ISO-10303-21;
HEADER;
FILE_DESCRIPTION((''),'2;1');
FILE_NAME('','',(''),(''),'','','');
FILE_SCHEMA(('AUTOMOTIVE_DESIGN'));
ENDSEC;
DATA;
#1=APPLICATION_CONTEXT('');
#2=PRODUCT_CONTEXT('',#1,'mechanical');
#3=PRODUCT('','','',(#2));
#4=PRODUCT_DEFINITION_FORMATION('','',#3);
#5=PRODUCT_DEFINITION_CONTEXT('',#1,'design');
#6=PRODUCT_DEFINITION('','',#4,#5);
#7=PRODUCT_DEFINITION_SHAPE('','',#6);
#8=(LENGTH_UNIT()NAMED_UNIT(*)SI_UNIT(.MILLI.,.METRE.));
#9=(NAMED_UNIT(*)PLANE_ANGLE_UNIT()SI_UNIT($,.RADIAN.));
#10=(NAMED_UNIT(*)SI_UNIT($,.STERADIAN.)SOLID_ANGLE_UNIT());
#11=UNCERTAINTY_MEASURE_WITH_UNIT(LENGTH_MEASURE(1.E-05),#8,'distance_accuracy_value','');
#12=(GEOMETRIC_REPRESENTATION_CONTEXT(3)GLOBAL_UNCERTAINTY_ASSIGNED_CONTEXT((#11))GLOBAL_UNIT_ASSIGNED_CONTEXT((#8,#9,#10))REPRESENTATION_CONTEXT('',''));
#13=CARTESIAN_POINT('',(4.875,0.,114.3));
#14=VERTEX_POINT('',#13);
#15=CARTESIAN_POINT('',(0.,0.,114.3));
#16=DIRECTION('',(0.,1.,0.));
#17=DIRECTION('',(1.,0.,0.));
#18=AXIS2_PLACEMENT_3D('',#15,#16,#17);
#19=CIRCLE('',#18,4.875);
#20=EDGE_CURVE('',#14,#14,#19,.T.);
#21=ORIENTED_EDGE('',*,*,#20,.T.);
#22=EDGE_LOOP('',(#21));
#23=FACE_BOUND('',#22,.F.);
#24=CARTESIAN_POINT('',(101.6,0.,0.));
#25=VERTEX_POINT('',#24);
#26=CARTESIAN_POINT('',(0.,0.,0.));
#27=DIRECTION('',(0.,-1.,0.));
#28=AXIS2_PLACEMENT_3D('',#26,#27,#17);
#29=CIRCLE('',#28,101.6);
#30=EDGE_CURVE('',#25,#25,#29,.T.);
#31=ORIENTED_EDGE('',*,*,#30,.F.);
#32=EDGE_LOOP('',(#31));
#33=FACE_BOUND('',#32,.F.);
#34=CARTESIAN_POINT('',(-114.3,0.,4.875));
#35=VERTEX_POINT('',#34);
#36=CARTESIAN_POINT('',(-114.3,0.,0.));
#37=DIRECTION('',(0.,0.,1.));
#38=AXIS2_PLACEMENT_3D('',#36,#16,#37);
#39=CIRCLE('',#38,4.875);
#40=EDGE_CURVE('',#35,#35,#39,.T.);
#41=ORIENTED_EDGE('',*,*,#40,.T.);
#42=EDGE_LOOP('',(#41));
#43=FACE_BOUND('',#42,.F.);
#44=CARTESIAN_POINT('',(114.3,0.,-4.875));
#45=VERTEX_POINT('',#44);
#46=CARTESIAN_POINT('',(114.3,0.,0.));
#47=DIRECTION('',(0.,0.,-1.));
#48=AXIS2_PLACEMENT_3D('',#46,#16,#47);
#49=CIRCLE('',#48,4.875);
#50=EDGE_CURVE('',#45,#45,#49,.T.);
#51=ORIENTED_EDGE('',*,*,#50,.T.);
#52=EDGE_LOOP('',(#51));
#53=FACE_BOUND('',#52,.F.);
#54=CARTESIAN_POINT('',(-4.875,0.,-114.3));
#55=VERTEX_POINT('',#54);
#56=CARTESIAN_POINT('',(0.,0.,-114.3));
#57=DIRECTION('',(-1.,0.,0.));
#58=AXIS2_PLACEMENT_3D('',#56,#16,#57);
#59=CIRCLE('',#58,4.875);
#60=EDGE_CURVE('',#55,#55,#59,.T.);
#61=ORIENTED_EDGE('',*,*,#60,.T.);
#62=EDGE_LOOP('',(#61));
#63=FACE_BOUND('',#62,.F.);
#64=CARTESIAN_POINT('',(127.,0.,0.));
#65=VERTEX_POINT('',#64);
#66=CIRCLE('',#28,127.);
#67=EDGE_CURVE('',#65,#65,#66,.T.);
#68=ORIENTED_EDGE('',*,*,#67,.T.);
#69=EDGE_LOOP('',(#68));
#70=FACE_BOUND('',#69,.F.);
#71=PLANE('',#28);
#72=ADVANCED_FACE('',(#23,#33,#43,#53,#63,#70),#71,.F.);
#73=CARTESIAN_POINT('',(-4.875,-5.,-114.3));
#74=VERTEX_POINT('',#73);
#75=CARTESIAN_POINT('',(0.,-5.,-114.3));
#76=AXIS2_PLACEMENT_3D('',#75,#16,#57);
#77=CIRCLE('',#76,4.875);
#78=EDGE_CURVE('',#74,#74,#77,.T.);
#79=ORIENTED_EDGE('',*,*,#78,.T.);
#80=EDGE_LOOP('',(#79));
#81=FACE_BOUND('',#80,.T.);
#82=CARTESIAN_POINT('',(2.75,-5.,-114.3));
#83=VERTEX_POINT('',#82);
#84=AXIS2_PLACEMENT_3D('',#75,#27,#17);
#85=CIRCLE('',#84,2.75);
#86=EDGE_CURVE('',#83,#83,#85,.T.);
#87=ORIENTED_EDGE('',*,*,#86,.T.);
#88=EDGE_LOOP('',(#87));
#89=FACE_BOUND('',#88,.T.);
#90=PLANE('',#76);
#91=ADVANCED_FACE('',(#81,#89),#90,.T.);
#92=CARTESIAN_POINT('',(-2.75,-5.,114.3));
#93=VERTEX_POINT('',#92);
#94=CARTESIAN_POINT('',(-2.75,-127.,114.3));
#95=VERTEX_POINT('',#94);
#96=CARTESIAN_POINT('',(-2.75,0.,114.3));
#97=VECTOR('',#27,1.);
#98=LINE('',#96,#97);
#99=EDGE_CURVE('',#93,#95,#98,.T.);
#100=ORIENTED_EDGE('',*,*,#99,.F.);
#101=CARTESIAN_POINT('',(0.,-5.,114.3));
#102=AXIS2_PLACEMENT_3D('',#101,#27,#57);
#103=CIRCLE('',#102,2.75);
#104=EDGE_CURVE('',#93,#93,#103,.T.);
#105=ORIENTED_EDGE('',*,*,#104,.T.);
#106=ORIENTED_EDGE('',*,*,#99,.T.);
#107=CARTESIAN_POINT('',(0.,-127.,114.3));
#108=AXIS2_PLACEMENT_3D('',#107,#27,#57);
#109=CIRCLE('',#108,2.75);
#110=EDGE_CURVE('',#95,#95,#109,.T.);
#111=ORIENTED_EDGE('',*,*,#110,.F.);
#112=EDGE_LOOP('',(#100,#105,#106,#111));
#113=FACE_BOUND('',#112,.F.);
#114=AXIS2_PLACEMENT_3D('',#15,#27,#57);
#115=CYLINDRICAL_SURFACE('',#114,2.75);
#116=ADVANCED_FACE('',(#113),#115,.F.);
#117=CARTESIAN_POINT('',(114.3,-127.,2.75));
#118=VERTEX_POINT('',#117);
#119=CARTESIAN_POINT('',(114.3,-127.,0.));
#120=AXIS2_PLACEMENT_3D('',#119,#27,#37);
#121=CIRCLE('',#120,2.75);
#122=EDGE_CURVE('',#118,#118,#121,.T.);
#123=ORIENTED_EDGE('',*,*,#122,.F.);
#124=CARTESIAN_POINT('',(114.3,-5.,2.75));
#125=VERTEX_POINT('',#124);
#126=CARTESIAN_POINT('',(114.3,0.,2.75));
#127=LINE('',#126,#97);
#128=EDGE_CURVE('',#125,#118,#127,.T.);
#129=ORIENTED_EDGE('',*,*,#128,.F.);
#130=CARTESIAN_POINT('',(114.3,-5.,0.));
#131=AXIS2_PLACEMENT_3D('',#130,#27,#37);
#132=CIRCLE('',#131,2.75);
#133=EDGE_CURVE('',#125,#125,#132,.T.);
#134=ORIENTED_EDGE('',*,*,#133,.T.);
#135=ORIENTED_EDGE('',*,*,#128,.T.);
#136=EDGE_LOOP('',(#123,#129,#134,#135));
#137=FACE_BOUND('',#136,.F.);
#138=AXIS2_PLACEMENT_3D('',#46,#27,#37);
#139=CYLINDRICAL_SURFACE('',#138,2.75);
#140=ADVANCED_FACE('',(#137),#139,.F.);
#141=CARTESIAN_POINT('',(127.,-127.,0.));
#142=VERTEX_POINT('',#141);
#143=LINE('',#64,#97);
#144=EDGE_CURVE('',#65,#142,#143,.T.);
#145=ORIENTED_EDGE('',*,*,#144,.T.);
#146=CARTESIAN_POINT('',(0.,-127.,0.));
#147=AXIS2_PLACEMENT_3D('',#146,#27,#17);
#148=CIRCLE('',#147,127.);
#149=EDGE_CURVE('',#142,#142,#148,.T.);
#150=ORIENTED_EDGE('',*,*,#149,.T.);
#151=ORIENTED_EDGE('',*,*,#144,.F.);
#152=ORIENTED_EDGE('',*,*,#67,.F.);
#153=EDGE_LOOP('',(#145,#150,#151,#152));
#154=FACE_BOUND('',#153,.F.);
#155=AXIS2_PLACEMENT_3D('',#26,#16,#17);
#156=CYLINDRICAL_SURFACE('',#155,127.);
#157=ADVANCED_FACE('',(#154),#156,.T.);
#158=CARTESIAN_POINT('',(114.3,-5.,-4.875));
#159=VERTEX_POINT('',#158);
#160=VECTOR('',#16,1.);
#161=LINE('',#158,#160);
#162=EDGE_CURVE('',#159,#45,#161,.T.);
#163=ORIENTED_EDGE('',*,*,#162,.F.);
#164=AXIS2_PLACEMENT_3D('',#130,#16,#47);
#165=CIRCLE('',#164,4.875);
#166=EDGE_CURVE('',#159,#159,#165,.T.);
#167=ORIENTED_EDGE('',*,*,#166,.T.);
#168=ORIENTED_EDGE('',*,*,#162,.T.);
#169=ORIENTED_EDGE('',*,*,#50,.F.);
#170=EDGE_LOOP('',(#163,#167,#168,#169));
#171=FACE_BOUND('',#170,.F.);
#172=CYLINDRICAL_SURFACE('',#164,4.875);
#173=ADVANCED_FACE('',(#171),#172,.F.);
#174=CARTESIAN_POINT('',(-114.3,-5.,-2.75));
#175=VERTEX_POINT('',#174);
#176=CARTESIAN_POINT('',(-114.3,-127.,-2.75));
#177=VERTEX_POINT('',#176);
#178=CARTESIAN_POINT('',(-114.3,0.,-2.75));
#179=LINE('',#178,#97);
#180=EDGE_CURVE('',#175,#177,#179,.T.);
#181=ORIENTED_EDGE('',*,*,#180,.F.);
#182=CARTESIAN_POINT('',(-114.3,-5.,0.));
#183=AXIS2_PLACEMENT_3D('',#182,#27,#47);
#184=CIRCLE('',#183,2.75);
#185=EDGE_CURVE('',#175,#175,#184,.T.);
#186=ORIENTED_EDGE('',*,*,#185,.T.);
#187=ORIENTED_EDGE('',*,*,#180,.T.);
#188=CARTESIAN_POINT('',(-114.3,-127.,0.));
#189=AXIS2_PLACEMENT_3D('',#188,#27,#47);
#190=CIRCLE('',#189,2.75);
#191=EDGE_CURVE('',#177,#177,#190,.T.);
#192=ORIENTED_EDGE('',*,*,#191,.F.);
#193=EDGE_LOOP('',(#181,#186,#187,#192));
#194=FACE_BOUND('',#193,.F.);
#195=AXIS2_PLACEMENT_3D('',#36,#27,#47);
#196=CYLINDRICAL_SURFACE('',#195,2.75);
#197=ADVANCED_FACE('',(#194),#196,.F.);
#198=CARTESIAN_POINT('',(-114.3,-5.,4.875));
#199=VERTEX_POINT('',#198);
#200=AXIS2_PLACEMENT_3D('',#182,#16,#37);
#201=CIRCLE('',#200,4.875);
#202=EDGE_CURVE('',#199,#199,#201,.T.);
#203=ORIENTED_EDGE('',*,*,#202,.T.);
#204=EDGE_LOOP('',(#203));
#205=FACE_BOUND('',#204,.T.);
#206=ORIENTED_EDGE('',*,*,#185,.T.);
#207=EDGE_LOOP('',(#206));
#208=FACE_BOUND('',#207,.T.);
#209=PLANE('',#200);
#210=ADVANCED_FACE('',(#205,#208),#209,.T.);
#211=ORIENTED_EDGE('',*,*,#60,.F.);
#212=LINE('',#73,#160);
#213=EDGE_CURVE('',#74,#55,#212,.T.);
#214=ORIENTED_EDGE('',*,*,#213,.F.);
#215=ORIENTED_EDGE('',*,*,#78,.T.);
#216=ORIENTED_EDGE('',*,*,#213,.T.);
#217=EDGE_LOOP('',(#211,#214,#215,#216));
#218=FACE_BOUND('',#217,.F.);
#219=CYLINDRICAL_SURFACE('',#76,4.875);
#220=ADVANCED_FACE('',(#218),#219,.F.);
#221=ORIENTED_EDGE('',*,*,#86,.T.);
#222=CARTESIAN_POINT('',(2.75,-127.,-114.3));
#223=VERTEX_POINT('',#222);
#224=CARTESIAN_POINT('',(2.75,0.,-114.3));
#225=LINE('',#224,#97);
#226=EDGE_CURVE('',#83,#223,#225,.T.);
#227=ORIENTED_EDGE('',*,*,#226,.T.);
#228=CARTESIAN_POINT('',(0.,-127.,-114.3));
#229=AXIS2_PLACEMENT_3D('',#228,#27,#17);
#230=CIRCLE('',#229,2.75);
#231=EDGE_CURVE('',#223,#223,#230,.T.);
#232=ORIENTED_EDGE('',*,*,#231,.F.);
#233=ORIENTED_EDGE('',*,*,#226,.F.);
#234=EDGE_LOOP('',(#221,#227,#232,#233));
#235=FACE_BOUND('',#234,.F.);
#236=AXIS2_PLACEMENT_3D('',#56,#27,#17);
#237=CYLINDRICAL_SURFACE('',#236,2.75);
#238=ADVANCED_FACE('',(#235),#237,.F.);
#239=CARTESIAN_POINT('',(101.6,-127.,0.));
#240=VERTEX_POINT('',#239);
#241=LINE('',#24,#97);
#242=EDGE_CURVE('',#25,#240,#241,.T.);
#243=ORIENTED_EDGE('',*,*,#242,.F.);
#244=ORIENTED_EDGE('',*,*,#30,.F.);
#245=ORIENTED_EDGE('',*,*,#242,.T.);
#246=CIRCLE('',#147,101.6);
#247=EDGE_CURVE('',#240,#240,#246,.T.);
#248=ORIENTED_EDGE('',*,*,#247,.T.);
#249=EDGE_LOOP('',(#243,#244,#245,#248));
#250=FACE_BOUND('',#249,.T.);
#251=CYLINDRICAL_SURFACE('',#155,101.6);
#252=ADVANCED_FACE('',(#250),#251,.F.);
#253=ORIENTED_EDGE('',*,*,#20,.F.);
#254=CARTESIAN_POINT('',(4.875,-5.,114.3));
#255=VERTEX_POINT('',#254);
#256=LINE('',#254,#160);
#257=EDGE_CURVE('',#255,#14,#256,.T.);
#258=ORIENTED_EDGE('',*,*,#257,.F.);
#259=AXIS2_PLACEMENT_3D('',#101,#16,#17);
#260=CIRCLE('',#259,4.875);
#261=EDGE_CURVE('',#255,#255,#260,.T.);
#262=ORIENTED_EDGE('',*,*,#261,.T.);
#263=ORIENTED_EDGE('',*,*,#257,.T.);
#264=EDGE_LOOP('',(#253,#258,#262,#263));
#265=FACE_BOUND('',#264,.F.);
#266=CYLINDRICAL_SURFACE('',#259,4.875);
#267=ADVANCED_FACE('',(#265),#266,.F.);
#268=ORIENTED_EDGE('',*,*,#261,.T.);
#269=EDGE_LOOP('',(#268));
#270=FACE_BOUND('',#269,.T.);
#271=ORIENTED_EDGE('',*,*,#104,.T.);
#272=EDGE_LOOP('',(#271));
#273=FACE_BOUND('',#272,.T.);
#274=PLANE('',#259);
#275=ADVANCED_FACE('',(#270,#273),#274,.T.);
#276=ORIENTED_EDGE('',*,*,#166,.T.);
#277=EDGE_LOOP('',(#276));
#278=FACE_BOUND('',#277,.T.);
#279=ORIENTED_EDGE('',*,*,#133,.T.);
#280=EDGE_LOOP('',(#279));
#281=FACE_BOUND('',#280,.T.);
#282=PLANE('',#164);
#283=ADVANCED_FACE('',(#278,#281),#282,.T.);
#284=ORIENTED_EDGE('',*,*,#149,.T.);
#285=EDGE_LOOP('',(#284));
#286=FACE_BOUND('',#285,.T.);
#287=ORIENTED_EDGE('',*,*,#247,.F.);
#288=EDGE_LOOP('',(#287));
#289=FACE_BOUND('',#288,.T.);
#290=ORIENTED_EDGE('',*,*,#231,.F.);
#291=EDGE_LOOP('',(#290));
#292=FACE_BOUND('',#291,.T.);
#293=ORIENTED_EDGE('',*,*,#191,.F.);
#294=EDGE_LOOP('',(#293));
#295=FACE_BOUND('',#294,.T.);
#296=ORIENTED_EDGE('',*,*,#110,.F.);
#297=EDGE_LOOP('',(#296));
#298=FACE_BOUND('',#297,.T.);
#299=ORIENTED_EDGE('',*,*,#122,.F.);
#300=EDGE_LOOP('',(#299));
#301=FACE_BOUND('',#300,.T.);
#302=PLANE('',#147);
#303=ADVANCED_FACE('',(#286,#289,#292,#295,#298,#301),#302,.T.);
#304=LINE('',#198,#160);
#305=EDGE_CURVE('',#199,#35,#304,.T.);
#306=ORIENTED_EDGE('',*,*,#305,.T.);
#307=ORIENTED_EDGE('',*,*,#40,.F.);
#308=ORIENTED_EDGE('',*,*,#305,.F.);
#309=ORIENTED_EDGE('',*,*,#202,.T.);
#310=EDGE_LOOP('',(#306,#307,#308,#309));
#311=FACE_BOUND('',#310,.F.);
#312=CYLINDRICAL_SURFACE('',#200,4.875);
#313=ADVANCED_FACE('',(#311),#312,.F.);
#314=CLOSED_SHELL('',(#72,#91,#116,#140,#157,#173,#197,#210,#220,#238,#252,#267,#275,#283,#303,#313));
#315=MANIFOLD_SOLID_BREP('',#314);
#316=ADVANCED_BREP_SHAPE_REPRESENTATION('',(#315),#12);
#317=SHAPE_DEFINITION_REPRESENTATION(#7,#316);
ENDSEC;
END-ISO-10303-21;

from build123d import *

# Parameters (mm, degrees)
F0_R            = 127
F0_R_2          = 101.6
F1_DEPTH        = 127
F3_D            = 5.5
F3_CBORE_D      = 9.75
F3_CBORE_DEPTH  = 5
F3_COPIES_COUNT = 4


# Not quite as in the source:
# - a pattern or mirror of a feature is missing from the dataset's text; its kind, count and spacing are read off the source's solid


with BuildPart() as f1:
    # F0 (on Front) → F1 (new body)
    with BuildSketch(Plane.XZ):
        Circle(F0_R)
        Circle(F0_R_2, mode=Mode.SUBTRACT)
    extrude(amount=F1_DEPTH)

    # F3 (through all)
    with Locations(Plane(origin=(0, 0, 0), x_dir=(-1, 0, 0), z_dir=(0, 1, 0))):
        with Locations((0, 0), (0, -114.3)):
            f3 = CounterBoreHole(F3_D / 2, F3_CBORE_D / 2, F3_CBORE_DEPTH)

    # F3_copies: F3 ×4 about axis
    f3_copies_axis = Axis((0, 0, 0), (0, 1, 0))
    for i in range(1, F3_COPIES_COUNT):
        add(f3.rotate(f3_copies_axis, i * 360 / F3_COPIES_COUNT), mode=Mode.SUBTRACT)


solid = f1.part
